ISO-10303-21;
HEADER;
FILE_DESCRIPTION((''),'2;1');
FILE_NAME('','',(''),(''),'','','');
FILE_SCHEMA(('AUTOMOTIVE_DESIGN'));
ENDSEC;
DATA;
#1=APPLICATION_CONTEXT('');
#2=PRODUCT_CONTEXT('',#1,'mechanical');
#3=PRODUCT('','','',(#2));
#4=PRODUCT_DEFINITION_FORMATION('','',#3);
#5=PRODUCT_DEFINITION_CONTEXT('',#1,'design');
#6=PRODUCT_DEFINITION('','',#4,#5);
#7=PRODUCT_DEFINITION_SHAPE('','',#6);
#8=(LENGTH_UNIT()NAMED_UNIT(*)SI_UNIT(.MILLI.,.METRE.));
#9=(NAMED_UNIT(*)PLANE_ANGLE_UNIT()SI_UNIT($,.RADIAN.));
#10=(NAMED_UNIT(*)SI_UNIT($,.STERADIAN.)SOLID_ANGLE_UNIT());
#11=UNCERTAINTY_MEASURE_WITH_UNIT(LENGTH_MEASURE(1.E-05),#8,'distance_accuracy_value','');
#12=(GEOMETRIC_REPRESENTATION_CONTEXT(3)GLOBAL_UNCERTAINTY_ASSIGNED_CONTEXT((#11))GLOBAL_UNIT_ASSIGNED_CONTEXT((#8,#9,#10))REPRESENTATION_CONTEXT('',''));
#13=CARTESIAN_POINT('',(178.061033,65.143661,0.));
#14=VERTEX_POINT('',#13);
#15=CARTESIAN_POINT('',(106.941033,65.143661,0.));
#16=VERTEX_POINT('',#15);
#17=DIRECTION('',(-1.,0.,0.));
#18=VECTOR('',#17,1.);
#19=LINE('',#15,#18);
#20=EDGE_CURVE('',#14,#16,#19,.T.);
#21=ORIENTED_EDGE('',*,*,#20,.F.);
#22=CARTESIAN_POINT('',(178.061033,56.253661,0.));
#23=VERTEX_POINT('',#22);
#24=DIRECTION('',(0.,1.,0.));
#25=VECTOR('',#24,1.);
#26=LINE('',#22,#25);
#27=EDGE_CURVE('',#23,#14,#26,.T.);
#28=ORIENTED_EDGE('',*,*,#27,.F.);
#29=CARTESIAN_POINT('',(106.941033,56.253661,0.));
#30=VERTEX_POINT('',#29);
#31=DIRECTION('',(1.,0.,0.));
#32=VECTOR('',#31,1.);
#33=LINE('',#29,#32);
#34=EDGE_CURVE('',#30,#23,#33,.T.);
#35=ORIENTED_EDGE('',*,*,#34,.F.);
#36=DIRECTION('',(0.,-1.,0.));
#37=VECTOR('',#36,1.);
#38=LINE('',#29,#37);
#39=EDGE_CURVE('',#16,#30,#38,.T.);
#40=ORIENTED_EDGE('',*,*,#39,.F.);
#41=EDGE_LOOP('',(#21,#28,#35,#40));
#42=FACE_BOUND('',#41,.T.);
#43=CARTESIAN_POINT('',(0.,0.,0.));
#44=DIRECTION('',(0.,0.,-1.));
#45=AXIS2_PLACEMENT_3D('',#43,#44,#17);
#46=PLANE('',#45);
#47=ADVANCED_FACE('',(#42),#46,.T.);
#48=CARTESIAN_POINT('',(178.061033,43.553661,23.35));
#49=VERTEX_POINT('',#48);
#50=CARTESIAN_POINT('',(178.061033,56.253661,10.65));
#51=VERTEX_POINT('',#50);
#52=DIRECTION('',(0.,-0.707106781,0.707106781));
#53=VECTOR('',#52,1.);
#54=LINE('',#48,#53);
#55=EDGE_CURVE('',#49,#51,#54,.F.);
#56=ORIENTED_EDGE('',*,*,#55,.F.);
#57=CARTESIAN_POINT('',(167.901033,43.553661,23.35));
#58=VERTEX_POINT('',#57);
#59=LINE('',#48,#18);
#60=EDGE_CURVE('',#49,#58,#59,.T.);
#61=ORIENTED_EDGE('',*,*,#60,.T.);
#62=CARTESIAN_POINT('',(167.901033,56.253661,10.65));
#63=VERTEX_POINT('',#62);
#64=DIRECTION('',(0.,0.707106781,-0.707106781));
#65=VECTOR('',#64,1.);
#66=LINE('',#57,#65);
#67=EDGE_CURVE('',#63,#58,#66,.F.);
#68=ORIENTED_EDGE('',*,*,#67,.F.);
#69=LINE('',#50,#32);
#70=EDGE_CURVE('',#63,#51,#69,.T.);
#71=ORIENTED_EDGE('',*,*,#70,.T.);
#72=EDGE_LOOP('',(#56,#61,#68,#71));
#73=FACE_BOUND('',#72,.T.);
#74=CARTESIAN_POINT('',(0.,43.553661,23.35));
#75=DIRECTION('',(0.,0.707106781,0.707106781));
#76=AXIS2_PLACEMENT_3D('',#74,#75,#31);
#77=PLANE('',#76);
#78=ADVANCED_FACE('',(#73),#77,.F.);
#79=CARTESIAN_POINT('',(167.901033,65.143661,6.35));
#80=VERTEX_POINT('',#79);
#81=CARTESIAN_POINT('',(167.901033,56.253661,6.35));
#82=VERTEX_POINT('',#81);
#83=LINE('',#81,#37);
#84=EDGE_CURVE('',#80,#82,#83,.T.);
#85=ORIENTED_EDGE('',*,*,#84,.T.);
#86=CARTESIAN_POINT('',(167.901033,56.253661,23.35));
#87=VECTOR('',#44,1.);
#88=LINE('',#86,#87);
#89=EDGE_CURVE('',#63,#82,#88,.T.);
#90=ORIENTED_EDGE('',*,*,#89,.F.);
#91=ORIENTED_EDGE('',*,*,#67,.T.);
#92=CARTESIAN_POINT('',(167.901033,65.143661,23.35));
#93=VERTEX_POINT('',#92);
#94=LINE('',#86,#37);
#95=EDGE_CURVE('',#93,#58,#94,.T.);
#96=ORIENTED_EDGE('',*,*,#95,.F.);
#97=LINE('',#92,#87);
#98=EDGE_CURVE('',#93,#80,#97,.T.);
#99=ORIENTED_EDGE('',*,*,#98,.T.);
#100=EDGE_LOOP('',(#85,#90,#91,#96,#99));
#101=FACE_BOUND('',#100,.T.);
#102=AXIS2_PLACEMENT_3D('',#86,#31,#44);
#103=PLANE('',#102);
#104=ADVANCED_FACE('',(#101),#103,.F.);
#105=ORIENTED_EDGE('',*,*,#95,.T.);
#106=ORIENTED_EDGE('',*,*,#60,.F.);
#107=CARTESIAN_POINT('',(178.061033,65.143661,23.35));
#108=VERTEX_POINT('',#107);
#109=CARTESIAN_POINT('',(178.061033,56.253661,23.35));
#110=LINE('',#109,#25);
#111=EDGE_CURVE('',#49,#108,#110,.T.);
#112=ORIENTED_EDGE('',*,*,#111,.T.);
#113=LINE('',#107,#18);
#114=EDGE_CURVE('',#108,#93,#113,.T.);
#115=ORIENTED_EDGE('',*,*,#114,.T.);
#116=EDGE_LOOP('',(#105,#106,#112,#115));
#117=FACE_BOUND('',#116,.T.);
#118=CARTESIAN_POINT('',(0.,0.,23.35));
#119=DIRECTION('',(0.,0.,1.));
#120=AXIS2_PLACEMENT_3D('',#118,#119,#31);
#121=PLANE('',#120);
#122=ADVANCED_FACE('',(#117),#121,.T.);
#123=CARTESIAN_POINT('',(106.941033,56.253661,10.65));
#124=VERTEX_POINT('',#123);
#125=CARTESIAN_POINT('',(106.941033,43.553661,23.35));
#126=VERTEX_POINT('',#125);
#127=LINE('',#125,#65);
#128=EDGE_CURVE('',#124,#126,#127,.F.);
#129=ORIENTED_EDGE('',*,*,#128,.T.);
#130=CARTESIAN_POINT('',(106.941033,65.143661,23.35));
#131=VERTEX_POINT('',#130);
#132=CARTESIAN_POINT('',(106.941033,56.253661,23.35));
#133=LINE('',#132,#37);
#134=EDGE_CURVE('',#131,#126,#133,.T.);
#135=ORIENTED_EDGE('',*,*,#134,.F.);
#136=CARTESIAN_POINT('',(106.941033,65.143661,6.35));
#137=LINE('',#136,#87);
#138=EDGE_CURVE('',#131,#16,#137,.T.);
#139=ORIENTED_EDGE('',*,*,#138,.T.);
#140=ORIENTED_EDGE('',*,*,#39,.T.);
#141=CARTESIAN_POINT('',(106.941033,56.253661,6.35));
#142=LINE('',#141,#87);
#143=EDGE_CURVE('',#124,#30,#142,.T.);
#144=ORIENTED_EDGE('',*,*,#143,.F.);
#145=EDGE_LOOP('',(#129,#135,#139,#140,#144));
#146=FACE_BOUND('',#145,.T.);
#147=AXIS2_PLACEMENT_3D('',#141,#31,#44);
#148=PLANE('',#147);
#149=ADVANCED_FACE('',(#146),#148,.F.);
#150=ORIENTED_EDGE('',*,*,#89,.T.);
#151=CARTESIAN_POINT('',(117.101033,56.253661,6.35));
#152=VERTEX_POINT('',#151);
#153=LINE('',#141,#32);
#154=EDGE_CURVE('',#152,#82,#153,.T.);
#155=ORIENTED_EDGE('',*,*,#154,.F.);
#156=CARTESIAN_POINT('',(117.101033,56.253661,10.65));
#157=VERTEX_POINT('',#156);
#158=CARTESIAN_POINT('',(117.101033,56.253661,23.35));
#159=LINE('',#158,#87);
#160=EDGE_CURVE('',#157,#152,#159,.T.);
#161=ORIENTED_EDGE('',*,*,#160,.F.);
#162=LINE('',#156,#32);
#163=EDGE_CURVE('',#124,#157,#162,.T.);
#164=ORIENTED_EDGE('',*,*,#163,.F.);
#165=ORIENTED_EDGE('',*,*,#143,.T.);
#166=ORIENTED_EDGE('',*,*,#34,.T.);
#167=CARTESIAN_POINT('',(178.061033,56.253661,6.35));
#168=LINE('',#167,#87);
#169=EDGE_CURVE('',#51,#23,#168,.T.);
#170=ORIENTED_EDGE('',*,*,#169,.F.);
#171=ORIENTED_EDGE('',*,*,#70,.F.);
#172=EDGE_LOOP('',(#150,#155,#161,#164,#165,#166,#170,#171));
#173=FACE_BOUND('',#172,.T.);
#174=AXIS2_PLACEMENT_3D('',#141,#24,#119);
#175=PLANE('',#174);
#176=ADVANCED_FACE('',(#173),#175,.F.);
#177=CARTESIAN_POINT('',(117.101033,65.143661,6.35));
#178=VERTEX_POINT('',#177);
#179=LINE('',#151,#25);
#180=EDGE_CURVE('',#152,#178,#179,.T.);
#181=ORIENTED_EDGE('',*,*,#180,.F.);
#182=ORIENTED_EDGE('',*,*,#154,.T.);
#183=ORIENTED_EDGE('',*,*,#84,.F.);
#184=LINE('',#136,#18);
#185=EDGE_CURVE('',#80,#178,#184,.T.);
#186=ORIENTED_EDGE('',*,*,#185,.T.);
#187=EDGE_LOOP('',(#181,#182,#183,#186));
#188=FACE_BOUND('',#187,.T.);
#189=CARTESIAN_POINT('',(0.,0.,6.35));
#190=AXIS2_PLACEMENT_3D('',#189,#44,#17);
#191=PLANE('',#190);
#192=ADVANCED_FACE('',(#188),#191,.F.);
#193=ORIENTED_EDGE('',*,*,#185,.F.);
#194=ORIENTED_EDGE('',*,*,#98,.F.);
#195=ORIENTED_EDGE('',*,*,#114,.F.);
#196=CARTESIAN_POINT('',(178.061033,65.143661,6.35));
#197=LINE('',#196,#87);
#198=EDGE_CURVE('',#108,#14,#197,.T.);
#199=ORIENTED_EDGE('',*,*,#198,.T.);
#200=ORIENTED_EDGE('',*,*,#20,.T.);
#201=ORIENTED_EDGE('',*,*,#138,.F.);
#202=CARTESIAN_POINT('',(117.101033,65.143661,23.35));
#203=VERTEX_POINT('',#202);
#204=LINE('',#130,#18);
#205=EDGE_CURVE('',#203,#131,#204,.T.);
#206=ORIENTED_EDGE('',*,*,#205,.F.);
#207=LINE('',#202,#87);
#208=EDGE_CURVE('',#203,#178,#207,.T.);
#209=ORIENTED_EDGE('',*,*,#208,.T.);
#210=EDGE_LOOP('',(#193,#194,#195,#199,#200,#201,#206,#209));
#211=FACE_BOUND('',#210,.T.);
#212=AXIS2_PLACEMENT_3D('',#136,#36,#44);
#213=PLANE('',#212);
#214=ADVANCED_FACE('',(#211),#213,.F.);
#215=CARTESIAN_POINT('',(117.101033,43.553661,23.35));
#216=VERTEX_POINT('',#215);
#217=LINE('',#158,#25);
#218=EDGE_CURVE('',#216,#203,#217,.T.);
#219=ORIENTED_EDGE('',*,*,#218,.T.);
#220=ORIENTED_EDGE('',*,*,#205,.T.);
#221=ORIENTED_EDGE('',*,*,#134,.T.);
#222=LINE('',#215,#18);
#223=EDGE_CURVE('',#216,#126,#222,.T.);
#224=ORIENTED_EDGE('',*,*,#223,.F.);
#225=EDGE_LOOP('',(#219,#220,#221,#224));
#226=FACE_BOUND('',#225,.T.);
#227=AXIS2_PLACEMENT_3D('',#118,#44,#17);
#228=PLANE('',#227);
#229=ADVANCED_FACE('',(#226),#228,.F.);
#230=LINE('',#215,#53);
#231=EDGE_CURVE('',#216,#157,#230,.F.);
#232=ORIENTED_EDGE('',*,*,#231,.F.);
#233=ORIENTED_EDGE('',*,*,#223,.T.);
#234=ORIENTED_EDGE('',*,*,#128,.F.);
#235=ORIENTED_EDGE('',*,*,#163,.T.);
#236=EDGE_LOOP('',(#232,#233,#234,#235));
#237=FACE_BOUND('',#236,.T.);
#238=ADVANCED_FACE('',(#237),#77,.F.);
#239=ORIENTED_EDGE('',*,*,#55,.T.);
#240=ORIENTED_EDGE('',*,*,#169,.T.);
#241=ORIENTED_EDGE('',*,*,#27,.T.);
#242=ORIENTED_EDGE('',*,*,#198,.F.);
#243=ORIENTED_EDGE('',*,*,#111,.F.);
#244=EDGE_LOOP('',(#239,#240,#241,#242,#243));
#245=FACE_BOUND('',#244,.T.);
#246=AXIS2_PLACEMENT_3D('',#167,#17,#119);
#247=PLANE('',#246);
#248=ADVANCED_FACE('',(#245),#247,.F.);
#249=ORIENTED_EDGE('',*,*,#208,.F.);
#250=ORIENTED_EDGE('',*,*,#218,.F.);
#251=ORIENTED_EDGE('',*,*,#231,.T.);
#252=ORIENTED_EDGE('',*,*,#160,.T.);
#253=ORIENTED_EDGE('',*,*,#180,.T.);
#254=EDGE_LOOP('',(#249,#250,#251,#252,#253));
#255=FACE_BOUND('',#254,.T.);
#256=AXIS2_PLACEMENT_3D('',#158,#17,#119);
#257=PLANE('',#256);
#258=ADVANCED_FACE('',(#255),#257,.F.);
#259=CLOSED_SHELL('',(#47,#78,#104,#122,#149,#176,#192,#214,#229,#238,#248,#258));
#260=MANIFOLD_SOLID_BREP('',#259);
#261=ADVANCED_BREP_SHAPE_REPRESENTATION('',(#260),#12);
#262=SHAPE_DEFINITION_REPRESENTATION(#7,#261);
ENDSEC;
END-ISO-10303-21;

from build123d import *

# Parameters (mm, degrees)
SKETCH1_W           = 71.12
SKETCH1_H           = 8.89
BOSS_EXTRUDE1_DEPTH = 6.35
SKETCH5_W           = 10.16
SKETCH5_H           = 8.89
BOSS_EXTRUDE5_DEPTH = 17
SKETCH6_W           = 10.16
SKETCH6_H           = 12.7
BOSS_EXTRUDE6_DEPTH = 12.7
CHAMFER3_SIZE       = 12.7


with BuildPart() as part:
    # Sketch1 → Boss-Extrude1 (new body)
    with BuildSketch(Plane.XY):
        with Locations((142.501032585, 60.698661386)):
            Rectangle(SKETCH1_W, SKETCH1_H)
    extrude(amount=BOSS_EXTRUDE1_DEPTH)

    # Sketch5 → Boss-Extrude5 (add)
    with BuildSketch(Plane.XY.offset(6.35)):
        with Locations((112.021032585, 60.698661386)):
            Rectangle(SKETCH5_W, SKETCH5_H)
        with Locations((172.981032585, 60.698661386)):
            Rectangle(SKETCH5_W, SKETCH5_H)
    extrude(amount=BOSS_EXTRUDE5_DEPTH)

    # Sketch6 → Boss-Extrude6 (add)
    with BuildSketch(Plane.XZ.offset(-56.253661386)):
        with Locations((172.981032585, 17)):
            Rectangle(SKETCH6_W, SKETCH6_H)
        with Locations((112.021032585, 17)):
            Rectangle(SKETCH6_W, SKETCH6_H)
    extrude(amount=BOSS_EXTRUDE6_DEPTH)

    # Chamfer3
    chamfer3_edges = [part.edges().sort_by_distance(p)[0] for p in [
        (112.021032585, 43.553661386, 10.65),
        (172.981032585, 43.553661386, 10.65),
    ]]
    chamfer(chamfer3_edges, length=CHAMFER3_SIZE - 0.0001)  # a hair under: the kernel refuses the full size


solid = part.part
